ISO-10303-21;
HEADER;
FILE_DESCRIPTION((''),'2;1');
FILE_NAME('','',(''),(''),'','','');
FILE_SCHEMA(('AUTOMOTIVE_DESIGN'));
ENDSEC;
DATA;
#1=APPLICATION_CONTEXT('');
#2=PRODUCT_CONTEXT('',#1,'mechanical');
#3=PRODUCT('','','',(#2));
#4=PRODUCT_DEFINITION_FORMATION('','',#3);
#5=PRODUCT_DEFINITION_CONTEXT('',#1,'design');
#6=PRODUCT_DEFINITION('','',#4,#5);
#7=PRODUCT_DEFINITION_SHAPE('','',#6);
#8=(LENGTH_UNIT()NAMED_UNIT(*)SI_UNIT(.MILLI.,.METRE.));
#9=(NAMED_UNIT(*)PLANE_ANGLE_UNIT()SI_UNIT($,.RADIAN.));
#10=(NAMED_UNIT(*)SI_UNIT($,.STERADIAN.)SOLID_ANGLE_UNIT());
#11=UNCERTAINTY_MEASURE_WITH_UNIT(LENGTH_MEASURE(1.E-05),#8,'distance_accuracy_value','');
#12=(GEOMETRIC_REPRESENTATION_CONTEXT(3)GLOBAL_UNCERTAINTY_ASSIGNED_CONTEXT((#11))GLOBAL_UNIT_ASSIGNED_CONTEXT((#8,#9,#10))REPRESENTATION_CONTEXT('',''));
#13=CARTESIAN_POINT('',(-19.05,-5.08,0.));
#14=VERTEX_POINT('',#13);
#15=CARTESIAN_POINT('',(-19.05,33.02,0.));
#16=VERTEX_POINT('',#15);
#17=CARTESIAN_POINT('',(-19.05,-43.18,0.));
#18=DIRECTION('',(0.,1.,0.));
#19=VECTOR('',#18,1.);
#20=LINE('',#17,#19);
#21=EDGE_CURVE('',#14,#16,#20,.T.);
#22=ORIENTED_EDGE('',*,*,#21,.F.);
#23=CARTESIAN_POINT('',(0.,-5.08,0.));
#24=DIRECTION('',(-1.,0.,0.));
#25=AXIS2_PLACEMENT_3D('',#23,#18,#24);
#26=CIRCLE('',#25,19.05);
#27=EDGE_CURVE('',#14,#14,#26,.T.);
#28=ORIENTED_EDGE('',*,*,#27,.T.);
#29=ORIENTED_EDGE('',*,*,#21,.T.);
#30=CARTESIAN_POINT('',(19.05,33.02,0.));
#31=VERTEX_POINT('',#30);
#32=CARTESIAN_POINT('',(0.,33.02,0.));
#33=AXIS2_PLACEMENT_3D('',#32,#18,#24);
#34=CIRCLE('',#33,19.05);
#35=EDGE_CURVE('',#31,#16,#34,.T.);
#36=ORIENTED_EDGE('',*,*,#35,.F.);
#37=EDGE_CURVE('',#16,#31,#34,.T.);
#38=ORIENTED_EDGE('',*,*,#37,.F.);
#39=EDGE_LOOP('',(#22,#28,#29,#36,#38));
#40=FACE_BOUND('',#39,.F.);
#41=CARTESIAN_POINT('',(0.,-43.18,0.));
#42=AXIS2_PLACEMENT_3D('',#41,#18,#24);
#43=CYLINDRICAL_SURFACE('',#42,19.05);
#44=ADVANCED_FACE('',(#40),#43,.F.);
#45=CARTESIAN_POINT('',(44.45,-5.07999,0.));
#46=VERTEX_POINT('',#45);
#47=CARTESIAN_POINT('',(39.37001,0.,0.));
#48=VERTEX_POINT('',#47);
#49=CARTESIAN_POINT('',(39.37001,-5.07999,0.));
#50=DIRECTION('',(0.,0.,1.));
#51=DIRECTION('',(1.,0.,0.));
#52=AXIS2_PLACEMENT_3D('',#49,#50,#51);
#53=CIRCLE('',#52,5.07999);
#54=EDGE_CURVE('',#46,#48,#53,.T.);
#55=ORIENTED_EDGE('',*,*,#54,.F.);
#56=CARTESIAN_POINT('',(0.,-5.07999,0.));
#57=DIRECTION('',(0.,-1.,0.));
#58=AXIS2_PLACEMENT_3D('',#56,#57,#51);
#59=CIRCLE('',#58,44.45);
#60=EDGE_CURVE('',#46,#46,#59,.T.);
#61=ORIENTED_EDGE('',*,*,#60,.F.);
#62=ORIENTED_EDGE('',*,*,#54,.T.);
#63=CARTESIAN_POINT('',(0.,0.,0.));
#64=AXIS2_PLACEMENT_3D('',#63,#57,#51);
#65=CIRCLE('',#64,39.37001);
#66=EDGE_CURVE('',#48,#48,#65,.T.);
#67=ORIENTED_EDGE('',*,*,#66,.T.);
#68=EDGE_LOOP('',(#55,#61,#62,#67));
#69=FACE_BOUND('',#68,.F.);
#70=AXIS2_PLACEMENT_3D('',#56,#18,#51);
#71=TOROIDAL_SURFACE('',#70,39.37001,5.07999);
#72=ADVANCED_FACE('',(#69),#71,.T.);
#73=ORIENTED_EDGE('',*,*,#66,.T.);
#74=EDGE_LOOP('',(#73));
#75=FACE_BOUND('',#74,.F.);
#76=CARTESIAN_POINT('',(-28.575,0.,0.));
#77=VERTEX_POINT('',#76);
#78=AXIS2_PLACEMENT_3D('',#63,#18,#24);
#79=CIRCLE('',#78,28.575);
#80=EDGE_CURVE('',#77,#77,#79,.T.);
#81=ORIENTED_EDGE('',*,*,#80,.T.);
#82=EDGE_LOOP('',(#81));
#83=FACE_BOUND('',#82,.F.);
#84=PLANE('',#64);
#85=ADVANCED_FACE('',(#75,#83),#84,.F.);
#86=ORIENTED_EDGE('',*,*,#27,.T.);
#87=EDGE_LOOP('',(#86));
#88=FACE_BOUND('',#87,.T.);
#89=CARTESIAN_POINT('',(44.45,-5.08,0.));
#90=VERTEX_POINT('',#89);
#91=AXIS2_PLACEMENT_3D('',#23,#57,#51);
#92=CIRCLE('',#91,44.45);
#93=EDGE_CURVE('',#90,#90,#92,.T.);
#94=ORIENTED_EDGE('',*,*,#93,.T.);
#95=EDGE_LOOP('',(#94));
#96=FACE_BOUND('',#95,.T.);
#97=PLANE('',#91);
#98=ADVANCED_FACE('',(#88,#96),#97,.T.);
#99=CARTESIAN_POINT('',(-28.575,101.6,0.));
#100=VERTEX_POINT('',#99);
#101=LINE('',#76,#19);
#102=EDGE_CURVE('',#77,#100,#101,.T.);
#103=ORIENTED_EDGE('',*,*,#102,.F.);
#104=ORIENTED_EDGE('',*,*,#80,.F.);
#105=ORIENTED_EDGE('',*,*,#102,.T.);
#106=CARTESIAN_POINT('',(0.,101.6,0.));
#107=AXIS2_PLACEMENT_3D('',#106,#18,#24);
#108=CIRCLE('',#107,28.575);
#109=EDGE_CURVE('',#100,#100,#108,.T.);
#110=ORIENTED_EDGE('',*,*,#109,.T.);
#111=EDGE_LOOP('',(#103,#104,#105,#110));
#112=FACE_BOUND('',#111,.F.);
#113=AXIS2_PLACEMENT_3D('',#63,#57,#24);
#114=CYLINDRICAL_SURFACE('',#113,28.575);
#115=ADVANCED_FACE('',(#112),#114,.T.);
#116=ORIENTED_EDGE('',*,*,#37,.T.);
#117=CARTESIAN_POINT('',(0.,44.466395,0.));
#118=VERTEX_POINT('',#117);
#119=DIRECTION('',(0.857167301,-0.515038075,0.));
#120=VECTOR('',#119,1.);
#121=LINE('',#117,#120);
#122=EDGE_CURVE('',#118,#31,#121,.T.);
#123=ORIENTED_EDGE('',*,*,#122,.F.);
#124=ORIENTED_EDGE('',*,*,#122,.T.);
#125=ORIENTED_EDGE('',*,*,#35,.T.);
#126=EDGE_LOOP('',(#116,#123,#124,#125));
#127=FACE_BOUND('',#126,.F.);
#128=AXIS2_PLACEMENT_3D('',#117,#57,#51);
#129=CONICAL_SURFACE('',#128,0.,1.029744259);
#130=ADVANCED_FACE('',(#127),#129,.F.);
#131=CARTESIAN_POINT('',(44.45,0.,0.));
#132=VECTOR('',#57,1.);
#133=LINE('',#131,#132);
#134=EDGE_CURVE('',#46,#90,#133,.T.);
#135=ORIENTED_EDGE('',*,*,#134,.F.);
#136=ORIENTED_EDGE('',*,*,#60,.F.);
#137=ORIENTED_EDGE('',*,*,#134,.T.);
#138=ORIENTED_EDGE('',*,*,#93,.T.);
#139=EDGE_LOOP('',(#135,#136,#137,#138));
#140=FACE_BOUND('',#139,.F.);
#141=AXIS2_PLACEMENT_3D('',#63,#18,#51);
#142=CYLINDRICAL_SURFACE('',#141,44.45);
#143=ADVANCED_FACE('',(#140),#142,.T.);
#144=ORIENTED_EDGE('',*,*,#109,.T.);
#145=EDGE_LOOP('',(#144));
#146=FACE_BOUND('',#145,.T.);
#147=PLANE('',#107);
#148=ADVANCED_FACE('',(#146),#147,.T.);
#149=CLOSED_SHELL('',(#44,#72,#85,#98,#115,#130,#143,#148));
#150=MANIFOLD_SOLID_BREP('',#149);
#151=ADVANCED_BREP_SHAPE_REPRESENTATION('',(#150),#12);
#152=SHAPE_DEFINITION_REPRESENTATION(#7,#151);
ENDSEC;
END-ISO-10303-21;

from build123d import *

# Parameters (mm, degrees)
F0_R     = 44.45
F1_DEPTH = 5.08
F2_R     = 5.07999
F4_R     = 28.575
F5_DEPTH = 101.6
F6_D     = 38.1
F6_DEPTH = 38.1
F6_TIP   = 11.4463947925


# Not quite as in the source:
# - a fillet or chamfer is up to 0.001 mm smaller than in the source, because OpenCascade refuses the exact size


with BuildPart() as f1:
    # F0 (on Front) → F1 (new body)
    with BuildSketch(Plane.XZ):
        Circle(F0_R)
    extrude(amount=F1_DEPTH)

    # F2 (radius 5.08 in the source; OpenCascade refuses exactly that, so slightly less here)
    f2_edges = [f1.edges().sort_by_distance(p)[0] for p in [
        (-44.45, 0, 0),
    ]]
    fillet(f2_edges, radius=F2_R)

    # F4 (on face) → F5 (join)
    with BuildSketch(Plane(origin=(0, 0, 0), x_dir=(-1, 0, 0), z_dir=(0, 1, 0))):
        Circle(F4_R)
    extrude(amount=F5_DEPTH)

    # F6
    with Locations(Plane.XZ.offset(5.08)):
        with Locations((0, 0)):
            Hole(F6_D / 2, depth=F6_DEPTH)
            with Locations((0, 0, -(F6_DEPTH + F6_TIP / 2))):  # 118° drill point
                Cone(0, F6_D / 2, F6_TIP, mode=Mode.SUBTRACT)


solid = f1.part
